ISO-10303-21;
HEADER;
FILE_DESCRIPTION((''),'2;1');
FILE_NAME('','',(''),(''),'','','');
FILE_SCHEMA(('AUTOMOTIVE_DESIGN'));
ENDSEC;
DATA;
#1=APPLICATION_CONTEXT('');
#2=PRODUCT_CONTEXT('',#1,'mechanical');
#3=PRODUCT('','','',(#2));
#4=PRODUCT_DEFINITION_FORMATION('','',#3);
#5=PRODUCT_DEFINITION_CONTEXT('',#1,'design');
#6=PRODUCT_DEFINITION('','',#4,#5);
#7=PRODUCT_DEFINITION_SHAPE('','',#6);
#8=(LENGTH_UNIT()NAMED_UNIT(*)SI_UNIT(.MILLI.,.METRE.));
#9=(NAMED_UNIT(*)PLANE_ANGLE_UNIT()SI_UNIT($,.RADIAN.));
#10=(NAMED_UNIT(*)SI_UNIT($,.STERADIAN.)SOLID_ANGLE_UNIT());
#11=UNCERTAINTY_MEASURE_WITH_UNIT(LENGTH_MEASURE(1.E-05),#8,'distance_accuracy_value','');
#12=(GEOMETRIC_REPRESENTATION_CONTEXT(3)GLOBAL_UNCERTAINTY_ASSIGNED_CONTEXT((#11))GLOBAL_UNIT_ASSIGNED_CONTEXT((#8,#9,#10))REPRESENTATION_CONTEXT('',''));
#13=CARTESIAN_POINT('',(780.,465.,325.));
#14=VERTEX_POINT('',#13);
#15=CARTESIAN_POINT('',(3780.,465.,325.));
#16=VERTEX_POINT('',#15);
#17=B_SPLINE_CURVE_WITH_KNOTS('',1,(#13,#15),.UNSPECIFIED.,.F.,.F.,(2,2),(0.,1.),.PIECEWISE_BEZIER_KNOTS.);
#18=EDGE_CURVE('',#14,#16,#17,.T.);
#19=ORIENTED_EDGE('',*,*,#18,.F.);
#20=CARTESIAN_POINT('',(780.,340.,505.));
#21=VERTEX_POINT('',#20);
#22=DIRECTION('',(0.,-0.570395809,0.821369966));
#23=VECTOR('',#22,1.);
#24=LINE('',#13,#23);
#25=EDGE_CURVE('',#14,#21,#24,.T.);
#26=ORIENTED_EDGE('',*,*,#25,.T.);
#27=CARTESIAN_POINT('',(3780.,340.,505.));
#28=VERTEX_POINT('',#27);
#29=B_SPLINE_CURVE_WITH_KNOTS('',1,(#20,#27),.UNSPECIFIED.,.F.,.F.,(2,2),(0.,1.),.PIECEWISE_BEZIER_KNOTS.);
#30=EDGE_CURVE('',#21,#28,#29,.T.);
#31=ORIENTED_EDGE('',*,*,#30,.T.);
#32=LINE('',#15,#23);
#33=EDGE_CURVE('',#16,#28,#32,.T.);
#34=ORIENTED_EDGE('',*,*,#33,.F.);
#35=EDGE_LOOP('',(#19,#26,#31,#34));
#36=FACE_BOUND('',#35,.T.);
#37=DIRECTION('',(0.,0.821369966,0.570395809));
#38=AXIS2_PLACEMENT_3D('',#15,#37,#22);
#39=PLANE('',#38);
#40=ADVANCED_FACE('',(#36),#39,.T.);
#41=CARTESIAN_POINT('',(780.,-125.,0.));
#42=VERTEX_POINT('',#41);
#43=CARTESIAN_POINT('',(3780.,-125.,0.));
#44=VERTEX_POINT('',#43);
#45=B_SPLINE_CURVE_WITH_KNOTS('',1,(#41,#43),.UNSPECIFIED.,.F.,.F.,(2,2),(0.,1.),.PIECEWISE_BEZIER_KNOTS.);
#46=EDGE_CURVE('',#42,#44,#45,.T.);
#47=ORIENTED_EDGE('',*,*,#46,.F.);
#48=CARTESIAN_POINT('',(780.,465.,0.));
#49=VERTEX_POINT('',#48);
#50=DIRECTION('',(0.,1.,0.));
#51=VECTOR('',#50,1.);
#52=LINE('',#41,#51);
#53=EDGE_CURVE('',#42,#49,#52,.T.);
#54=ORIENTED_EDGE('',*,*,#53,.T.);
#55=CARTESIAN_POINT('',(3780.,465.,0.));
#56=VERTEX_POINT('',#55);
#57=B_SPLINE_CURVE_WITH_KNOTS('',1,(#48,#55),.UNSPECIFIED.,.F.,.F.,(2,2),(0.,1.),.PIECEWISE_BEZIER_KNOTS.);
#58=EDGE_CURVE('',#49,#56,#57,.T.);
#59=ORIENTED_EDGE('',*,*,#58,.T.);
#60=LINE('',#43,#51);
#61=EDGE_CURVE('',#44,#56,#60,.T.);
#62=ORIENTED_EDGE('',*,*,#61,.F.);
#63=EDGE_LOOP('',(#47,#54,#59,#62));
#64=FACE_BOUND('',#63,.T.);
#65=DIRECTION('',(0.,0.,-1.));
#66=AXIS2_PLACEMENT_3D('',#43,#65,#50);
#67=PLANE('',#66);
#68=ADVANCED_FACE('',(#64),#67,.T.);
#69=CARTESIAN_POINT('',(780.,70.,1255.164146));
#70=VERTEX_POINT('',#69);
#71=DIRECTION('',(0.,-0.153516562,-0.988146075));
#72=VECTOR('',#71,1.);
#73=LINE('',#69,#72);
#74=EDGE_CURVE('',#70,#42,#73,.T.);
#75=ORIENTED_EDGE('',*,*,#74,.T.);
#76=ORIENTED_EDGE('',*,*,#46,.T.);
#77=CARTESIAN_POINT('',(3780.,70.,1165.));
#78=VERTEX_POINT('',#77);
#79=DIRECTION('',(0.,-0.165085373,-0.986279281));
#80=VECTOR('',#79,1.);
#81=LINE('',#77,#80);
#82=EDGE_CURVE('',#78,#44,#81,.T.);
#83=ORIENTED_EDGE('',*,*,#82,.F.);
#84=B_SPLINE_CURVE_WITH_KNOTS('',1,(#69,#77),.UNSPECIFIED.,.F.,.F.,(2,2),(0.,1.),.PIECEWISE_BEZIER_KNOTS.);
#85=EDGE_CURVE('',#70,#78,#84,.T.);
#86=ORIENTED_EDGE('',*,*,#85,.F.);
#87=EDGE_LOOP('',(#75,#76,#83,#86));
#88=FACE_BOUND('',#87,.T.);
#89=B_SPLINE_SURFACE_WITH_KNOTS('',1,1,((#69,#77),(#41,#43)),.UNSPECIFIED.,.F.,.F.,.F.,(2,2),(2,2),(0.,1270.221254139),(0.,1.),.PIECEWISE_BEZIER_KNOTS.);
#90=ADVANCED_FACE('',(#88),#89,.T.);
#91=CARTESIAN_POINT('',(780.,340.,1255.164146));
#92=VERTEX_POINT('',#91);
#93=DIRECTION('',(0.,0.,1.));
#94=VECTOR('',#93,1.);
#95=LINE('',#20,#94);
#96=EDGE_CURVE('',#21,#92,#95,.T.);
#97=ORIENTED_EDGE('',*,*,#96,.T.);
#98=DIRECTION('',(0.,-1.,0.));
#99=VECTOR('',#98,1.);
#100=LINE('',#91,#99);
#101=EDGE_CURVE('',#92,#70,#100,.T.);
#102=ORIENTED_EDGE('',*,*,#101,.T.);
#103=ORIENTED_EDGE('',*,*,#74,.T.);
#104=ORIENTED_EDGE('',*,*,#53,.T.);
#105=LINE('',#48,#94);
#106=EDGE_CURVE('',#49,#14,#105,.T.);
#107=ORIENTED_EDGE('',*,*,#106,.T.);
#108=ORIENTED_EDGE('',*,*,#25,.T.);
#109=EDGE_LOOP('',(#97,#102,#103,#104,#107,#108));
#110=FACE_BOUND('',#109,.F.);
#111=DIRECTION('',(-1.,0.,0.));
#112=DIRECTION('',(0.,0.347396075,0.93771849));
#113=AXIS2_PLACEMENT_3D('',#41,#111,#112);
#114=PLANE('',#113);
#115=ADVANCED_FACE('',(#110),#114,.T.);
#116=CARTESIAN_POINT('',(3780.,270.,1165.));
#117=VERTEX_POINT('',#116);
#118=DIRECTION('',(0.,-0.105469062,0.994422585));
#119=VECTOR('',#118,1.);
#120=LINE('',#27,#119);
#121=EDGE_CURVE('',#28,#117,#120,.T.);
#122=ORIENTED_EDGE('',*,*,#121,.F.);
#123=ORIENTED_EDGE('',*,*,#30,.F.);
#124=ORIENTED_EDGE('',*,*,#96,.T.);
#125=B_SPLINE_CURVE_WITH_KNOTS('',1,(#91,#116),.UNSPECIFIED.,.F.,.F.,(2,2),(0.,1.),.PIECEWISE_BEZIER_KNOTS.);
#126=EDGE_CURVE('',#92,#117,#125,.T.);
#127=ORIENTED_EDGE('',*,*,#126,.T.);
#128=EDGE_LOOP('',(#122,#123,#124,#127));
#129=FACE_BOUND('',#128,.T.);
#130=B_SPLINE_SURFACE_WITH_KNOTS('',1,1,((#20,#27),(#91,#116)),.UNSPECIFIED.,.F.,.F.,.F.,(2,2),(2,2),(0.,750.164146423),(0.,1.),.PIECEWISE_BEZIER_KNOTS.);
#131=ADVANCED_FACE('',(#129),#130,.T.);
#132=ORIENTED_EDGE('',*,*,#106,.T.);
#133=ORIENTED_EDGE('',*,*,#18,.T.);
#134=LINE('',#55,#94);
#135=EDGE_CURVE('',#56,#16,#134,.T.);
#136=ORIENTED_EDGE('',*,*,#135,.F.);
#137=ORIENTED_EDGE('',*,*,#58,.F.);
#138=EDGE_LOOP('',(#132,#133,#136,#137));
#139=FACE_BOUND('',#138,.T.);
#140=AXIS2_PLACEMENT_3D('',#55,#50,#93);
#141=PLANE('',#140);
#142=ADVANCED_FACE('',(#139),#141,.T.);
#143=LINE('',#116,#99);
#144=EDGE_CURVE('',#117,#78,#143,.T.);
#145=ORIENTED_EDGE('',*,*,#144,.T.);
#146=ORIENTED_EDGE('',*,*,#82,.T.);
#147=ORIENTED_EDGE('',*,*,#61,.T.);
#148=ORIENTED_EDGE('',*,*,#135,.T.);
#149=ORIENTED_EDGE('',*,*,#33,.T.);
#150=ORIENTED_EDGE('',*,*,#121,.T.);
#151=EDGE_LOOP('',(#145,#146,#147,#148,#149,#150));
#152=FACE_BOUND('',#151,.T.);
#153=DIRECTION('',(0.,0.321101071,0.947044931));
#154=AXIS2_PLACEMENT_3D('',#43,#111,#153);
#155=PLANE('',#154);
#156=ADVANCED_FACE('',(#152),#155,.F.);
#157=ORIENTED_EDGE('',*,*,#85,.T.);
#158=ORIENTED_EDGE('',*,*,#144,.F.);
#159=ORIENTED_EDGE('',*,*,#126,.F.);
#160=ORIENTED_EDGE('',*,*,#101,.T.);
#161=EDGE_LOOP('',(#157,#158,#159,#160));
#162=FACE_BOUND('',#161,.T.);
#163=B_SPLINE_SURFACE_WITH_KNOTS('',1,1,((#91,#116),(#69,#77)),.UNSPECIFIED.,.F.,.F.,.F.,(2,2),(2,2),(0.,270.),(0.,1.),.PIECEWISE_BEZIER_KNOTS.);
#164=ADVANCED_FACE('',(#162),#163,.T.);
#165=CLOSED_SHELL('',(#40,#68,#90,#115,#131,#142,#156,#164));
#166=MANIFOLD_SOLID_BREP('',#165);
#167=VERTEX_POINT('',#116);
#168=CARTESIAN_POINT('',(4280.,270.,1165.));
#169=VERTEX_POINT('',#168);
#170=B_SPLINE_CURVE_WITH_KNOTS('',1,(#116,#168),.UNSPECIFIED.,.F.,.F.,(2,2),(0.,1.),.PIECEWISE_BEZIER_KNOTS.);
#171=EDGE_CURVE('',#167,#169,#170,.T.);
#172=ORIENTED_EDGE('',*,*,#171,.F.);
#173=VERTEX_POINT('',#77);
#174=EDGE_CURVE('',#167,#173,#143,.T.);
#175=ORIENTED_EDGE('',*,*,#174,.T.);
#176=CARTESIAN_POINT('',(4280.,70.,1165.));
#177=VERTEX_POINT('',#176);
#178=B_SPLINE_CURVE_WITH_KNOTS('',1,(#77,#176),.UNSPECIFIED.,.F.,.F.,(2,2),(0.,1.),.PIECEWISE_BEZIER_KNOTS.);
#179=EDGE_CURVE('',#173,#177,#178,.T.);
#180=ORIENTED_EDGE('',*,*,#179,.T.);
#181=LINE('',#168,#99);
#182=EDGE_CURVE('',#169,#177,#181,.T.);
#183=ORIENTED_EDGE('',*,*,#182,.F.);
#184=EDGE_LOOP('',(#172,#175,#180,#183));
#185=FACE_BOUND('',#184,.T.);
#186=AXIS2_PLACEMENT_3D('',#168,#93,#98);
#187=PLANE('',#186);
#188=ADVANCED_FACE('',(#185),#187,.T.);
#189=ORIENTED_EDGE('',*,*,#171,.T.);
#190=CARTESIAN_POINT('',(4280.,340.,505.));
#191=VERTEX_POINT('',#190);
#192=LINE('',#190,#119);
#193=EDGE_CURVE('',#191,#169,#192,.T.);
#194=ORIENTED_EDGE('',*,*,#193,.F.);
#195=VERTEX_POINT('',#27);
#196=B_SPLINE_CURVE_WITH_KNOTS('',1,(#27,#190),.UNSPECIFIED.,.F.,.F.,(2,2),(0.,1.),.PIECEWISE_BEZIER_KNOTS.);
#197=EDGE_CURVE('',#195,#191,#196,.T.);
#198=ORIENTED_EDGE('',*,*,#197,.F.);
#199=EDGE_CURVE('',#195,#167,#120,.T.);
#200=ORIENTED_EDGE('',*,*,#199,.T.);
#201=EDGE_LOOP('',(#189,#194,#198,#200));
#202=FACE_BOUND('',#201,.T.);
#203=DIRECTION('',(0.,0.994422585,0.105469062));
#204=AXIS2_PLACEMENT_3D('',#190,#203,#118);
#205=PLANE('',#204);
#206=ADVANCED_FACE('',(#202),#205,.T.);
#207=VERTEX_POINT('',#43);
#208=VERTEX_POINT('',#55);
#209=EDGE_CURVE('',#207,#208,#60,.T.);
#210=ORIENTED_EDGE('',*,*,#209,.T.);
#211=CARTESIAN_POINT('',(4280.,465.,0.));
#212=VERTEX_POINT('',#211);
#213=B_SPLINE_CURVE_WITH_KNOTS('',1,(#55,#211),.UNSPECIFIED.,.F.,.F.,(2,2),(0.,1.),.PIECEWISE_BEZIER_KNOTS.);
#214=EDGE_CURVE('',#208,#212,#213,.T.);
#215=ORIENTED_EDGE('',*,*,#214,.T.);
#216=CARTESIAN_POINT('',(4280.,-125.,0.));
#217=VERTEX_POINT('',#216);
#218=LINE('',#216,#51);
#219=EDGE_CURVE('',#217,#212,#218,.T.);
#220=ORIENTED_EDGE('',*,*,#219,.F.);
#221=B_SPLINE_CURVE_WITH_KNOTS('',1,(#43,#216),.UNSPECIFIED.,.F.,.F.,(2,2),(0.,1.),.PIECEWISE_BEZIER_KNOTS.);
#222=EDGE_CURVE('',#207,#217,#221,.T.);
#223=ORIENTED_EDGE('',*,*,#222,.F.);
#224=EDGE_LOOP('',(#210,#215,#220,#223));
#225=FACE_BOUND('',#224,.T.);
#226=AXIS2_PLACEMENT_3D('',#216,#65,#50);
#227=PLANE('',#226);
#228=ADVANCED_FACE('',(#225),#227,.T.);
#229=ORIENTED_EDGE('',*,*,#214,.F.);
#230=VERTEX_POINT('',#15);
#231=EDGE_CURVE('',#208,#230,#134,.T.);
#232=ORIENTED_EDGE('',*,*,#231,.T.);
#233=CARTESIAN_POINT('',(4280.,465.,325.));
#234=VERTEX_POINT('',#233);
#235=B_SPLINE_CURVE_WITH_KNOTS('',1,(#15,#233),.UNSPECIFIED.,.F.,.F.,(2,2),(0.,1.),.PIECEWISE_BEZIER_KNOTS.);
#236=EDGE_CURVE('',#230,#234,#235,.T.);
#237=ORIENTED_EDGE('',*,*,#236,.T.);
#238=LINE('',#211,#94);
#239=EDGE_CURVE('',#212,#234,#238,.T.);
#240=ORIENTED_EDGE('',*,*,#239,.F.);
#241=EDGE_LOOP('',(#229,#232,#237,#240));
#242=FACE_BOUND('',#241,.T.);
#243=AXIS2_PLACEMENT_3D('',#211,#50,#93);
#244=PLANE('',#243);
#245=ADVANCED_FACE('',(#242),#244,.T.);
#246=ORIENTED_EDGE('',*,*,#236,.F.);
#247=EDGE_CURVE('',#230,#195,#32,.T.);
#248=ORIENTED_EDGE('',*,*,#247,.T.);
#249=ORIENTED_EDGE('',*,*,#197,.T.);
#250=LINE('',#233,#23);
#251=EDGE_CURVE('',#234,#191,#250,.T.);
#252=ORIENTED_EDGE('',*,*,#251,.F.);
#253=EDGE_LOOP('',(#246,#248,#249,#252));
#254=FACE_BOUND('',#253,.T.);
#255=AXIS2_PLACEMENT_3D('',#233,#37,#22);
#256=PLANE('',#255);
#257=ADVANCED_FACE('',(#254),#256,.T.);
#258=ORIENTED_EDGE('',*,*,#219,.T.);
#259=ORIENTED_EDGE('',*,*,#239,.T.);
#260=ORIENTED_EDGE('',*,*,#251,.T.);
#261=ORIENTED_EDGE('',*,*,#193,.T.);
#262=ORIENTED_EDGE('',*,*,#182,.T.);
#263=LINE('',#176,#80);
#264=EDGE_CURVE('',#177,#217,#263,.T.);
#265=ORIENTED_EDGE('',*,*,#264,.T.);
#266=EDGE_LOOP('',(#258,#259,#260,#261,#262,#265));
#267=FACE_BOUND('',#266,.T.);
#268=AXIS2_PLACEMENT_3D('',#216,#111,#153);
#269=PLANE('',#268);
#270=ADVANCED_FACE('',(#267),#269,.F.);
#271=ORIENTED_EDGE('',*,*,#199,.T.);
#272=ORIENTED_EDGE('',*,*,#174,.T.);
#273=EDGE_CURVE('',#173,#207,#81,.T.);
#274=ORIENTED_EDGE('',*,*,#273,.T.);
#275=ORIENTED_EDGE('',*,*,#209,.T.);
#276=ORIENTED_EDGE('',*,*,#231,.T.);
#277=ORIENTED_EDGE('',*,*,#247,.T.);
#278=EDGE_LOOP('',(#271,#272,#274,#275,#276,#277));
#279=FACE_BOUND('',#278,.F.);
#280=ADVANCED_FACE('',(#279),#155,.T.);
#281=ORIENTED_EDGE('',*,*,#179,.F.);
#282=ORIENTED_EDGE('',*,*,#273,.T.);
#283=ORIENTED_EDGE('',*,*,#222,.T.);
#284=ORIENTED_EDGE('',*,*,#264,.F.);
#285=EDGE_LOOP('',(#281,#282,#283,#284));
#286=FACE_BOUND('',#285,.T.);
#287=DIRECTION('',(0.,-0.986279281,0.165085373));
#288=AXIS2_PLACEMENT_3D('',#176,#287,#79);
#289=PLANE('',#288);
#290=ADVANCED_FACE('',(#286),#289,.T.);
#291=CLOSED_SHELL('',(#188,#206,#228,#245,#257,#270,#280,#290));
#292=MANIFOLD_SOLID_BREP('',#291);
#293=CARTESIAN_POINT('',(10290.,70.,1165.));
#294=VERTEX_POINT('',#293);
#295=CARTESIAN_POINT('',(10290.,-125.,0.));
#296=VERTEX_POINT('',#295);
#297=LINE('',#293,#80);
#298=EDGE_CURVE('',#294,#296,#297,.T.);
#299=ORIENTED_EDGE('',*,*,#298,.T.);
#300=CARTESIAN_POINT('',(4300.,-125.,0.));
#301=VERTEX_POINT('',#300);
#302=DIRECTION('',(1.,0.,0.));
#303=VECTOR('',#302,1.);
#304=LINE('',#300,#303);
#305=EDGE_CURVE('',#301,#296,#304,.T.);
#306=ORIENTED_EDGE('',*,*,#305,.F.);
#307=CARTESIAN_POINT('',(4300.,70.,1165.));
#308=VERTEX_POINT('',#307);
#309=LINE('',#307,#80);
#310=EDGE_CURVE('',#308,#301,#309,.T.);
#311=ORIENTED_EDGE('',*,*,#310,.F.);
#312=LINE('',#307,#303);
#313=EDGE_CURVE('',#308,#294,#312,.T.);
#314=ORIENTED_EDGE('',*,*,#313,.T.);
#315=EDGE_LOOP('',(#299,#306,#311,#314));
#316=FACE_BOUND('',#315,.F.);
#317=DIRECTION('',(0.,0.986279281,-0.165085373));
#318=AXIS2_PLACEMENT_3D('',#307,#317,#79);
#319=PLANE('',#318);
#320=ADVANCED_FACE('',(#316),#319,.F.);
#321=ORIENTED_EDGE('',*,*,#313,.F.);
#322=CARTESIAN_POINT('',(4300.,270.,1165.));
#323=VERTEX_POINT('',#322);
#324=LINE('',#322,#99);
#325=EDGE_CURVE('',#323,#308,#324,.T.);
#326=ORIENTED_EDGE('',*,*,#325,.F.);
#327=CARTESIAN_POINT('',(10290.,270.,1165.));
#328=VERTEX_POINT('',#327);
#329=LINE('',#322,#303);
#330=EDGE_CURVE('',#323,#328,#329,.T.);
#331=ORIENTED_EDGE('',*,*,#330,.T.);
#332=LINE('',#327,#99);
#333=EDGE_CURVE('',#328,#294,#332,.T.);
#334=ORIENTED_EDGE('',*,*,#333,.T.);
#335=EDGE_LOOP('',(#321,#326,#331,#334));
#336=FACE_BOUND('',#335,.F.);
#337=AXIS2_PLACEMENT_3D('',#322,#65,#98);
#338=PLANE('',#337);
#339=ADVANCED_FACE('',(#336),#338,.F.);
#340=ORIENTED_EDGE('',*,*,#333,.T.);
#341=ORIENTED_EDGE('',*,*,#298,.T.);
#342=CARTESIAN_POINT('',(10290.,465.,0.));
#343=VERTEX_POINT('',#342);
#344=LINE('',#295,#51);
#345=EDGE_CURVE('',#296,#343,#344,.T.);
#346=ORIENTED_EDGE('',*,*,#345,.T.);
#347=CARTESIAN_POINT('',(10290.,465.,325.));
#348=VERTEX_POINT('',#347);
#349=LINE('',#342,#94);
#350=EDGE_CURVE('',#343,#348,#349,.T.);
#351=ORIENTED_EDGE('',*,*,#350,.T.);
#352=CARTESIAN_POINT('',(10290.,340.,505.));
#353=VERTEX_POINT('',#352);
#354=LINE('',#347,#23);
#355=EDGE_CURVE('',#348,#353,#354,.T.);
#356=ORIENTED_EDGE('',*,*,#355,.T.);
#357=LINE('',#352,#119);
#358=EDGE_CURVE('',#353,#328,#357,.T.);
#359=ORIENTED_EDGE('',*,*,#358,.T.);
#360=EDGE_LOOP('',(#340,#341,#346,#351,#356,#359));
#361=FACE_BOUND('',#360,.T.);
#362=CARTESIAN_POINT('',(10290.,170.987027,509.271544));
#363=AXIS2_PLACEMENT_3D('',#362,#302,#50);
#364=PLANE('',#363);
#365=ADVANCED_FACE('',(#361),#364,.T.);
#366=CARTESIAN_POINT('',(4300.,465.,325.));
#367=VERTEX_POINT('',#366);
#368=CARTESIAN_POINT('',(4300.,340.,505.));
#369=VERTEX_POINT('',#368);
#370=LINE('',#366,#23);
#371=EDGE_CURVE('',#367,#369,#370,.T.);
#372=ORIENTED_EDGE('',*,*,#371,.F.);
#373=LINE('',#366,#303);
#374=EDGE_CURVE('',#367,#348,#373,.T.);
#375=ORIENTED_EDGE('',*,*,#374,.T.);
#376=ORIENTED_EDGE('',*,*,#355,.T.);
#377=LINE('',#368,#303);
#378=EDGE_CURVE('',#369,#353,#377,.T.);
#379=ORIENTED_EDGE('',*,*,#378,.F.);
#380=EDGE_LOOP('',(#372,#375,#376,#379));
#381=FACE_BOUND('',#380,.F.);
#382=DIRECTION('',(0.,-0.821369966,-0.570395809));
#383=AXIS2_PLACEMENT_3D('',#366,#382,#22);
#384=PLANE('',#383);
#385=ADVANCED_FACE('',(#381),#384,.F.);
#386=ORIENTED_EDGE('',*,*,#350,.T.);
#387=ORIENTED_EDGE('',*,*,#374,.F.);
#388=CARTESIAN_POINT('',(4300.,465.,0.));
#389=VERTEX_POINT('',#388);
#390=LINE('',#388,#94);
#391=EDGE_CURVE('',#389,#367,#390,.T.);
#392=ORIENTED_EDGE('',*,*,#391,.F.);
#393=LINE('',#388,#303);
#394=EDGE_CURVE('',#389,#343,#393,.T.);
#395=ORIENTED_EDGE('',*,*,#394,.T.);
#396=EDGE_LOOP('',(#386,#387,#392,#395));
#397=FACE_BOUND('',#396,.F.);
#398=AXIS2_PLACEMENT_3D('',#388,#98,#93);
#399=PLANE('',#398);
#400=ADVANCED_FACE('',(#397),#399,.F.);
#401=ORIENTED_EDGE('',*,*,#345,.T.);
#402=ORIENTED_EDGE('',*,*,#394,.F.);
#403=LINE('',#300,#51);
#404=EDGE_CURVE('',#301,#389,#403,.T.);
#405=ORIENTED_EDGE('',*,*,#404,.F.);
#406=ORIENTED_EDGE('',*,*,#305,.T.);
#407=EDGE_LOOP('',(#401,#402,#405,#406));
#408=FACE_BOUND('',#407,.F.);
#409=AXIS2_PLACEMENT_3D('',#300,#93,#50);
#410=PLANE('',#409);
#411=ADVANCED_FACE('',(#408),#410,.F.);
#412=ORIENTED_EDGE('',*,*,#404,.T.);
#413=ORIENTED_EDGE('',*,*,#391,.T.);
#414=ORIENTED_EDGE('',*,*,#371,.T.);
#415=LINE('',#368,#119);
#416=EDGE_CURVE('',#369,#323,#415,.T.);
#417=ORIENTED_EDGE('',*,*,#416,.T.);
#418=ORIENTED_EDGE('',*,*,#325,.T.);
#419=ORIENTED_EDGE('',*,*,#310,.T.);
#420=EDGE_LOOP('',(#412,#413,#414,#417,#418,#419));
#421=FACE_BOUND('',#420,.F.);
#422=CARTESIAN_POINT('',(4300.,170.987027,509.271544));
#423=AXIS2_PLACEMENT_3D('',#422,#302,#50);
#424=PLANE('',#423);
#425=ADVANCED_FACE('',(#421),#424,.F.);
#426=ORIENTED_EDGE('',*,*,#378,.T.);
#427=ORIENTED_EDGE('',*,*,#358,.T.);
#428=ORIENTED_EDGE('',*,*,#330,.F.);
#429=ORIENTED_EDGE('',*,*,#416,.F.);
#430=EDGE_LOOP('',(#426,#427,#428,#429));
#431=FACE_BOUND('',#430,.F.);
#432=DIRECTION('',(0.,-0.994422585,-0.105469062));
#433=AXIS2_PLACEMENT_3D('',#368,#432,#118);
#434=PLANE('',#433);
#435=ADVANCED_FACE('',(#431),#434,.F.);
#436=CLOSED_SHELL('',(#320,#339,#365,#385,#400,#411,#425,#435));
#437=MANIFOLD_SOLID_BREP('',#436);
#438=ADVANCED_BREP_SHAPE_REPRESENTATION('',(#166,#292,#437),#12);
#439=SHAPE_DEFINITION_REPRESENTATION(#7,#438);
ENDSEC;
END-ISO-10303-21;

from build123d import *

# Parameters (mm, degrees)
F11_DEPTH = 5990


with BuildPart() as f6:
    # F5 (on offset) → F6 section 0
    with BuildSketch(Plane.YZ.offset(3780)):
        Polygon((-125, 0), (465, 0), (465, 325), (340, 505), (270, 1165), (70, 1165), align=None)
    # F4 (on offset) → F6 section 1
    with BuildSketch(Plane.YZ.offset(4280)):
        Polygon((-125, 0), (465, 0), (465, 325), (340, 505), (270, 1165), (70, 1165), align=None)
    loft()


with BuildPart() as f8:
    # F7 (on offset) → F8 section 0
    with BuildSketch(Plane.YZ.offset(780)):
        Polygon((-125, 0), (465, 0), (465, 325), (340, 505), (340, 1255.1641464233), (70, 1255.1641464233), align=None)
    # F5 (on offset) → F8 section 1
    with BuildSketch(Plane.YZ.offset(3780)):
        Polygon((-125, 0), (465, 0), (465, 325), (340, 505), (270, 1165), (70, 1165), align=None)
    loft()


with BuildPart() as f11:
    # F10 (on offset) → F11 (new body)
    with BuildSketch(Plane.YZ.offset(4300)):
        Polygon((-125, 0), (465, 0), (465, 325), (340, 505), (270, 1165), (70, 1165), align=None)
    extrude(amount=F11_DEPTH)


solid = Compound([f6.part, f8.part, f11.part])
